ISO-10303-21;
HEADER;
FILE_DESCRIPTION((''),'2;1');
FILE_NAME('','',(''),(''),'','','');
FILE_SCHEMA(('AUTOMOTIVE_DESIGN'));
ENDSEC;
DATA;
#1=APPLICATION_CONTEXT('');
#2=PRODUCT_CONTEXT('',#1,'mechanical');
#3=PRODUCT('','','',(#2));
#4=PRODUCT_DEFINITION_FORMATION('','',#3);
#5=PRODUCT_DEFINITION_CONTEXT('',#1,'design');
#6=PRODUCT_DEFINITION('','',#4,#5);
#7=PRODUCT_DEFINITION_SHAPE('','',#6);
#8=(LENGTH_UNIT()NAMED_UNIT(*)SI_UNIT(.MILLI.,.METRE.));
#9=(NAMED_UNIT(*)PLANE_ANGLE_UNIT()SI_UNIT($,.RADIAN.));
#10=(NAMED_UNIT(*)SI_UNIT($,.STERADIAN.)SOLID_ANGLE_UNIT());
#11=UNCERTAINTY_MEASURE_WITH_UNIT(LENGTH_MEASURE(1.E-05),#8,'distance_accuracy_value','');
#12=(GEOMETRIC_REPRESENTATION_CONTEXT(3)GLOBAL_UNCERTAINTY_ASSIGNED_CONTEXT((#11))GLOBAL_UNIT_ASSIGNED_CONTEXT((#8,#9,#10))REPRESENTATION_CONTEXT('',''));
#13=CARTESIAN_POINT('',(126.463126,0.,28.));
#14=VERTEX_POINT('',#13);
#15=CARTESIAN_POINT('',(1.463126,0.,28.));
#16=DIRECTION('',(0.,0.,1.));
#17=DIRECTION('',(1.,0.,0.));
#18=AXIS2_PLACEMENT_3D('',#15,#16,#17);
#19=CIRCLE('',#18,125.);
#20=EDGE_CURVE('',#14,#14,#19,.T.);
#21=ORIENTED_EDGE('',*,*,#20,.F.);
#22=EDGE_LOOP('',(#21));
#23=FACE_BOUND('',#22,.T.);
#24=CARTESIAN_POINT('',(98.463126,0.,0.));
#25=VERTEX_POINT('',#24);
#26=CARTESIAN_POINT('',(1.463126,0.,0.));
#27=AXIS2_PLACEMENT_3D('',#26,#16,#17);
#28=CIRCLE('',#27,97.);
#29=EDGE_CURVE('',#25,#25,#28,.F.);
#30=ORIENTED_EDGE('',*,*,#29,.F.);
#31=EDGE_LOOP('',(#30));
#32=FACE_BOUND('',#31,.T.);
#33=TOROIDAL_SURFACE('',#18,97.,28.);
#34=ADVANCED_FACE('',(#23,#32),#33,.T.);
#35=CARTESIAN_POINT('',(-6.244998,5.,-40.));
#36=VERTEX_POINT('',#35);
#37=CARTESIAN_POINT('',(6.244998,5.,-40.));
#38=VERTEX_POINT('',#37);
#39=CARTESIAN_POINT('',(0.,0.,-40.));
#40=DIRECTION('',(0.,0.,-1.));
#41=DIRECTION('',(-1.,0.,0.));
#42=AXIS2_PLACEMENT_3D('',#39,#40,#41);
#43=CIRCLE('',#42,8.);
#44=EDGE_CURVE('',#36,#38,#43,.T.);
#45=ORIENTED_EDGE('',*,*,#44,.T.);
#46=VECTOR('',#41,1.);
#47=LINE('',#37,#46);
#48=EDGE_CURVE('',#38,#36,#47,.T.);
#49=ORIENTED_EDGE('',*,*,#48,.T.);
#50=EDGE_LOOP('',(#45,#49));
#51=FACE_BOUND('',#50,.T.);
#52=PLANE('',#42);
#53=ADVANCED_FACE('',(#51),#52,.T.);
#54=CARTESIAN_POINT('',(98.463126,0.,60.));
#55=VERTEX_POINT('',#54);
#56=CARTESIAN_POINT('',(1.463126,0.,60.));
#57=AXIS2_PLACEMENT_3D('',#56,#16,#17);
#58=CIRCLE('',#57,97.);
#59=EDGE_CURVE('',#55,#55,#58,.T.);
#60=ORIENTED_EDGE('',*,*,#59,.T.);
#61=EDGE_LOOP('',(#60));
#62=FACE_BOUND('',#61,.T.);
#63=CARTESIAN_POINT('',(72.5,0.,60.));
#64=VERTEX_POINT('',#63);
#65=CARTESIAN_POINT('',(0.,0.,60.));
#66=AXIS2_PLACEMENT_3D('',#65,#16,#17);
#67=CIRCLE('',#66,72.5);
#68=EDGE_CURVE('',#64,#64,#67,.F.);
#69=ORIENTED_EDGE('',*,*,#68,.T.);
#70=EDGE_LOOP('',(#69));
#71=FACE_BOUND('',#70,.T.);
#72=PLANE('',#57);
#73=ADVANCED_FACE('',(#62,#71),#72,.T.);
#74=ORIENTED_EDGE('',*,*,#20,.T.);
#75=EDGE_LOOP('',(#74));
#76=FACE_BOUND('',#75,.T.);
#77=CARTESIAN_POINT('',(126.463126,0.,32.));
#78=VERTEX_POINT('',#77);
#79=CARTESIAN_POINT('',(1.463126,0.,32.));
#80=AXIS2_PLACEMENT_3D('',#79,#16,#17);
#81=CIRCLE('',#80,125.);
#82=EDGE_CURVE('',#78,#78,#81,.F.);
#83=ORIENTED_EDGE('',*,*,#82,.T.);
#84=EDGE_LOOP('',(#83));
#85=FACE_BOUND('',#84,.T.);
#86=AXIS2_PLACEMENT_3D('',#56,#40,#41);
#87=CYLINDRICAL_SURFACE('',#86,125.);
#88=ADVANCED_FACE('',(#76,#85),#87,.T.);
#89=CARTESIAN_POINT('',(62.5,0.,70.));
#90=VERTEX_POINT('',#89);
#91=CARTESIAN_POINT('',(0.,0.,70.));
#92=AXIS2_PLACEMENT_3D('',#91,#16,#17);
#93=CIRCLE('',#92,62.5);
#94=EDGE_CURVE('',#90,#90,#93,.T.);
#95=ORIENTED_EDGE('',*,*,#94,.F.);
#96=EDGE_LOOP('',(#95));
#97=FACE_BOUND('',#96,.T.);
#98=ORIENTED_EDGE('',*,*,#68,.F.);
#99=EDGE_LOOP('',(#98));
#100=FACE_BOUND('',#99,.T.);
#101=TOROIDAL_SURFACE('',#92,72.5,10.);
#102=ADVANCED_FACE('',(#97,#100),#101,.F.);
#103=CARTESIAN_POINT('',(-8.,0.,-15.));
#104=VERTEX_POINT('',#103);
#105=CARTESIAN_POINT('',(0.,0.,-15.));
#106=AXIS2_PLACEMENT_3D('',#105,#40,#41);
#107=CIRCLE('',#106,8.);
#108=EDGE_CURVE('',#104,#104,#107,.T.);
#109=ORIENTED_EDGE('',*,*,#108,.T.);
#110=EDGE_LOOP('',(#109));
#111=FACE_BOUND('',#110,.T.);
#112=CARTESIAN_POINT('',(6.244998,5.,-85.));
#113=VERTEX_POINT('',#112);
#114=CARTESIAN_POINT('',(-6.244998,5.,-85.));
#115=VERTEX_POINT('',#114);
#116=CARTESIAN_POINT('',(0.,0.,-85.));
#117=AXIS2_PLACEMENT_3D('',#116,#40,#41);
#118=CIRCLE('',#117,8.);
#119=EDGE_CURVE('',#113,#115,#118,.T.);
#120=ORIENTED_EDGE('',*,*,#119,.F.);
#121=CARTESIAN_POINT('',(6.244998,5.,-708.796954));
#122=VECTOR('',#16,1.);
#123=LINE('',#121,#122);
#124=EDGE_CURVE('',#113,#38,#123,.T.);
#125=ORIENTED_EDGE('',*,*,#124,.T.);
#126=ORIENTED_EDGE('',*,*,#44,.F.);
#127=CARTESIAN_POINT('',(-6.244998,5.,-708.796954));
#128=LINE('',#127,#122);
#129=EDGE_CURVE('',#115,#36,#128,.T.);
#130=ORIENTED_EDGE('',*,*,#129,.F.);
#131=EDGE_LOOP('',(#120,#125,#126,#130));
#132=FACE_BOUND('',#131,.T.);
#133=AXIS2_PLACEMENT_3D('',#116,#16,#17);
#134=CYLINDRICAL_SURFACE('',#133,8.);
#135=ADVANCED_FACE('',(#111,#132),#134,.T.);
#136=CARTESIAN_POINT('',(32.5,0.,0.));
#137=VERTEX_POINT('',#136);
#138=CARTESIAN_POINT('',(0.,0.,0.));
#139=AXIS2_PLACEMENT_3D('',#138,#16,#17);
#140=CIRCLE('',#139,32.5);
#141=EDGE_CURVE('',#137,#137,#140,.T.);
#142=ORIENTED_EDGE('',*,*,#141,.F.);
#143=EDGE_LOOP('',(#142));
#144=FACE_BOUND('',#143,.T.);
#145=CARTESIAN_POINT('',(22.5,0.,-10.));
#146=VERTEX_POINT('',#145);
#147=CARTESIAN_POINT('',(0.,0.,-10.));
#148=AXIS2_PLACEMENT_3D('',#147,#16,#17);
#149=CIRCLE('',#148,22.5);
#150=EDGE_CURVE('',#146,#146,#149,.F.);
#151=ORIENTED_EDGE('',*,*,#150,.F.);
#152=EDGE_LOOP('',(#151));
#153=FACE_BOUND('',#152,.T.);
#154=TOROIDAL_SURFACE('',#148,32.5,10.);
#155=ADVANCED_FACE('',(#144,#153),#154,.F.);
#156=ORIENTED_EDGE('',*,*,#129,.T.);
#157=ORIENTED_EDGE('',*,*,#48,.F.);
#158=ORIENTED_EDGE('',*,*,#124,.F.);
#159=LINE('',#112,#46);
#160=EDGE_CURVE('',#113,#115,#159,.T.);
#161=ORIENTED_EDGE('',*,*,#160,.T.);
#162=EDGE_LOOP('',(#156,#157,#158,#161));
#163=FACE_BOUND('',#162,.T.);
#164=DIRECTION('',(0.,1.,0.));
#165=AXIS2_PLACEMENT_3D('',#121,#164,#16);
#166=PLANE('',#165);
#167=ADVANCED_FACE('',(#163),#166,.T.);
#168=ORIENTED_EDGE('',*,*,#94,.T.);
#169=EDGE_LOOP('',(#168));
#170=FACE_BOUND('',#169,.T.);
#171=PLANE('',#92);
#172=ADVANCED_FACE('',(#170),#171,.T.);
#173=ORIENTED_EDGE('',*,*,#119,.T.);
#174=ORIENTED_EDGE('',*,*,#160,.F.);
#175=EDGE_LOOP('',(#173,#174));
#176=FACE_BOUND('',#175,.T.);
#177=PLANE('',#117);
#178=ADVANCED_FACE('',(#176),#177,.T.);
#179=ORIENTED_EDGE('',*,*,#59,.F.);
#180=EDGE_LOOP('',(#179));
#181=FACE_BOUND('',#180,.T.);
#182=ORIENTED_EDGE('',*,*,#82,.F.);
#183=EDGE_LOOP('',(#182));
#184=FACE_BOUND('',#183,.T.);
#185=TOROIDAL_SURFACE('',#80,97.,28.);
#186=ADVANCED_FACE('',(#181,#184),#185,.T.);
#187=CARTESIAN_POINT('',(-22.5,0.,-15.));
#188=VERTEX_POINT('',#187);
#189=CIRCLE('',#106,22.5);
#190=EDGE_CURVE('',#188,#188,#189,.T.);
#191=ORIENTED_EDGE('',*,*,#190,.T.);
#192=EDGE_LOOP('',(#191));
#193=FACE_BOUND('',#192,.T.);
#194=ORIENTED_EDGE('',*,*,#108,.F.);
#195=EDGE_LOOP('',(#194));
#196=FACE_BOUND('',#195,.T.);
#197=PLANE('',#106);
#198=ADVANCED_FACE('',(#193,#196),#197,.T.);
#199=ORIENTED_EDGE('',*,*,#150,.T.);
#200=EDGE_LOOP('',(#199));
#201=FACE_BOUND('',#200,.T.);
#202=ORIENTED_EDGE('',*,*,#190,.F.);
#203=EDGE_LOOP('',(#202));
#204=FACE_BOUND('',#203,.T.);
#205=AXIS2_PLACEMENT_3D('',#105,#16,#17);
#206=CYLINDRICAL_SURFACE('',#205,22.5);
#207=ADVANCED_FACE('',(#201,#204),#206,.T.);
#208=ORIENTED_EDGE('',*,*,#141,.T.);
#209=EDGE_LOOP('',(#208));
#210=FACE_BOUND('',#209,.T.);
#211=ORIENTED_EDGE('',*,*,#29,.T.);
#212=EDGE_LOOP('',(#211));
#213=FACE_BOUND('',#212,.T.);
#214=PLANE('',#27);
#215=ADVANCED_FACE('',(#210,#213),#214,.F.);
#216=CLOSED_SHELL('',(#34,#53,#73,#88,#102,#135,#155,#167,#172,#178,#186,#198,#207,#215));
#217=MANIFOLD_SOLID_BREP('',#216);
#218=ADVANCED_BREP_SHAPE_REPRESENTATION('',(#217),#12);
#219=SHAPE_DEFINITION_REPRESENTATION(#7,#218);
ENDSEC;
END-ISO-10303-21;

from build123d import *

# Parameters (mm, degrees)
SCHIZZO1_R                    = 125
ESTRUSIONE_ESTRUSIONE1_DEPTH  = 60
SCHIZZO2_R                    = 62.5
ESTRUSIONE_ESTRUSIONE2_DEPTH  = 10
SCHIZZO3_R                    = 22.5
ESTRUSIONE_ESTRUSIONE3_DEPTH  = 15
SCHIZZO4_R                    = 8
ESTRUSIONE_ESTRUSIONE4_DEPTH  = 70
RACCORDO1_R                   = 10
RACCORDO2_R                   = 28
TAGLIO_ESTRUSIONE1_DEPTH      = 236.887520145
TAGLIO_ESTRUSIONE1_DEPTH_BACK = 45


with BuildPart() as part:
    # Schizzo1 → Estrusione-Estrusione1 (new body)
    with BuildSketch(Plane.XY):
        with Locations((1.463125693, 0)):
            Circle(SCHIZZO1_R)
    extrude(amount=ESTRUSIONE_ESTRUSIONE1_DEPTH)

    # Schizzo2 → Estrusione-Estrusione2 (add)
    with BuildSketch(Plane.XY.offset(60)):
        Circle(SCHIZZO2_R)
    extrude(amount=ESTRUSIONE_ESTRUSIONE2_DEPTH)

    # Schizzo3 → Estrusione-Estrusione3 (add)
    with BuildSketch(Plane(origin=(0, 0, 0), x_dir=(-1, 0, 0), z_dir=(0, 0, -1))):
        Circle(SCHIZZO3_R)
    extrude(amount=ESTRUSIONE_ESTRUSIONE3_DEPTH)

    # Schizzo4 → Estrusione-Estrusione4 (add)
    with BuildSketch(Plane(origin=(0, 0, -15), x_dir=(-1, 0, 0), z_dir=(0, 0, -1))):
        Circle(SCHIZZO4_R)
    extrude(amount=ESTRUSIONE_ESTRUSIONE4_DEPTH)

    # Raccordo1
    raccordo1_edges = [part.edges().sort_by_distance(p)[0] for p in [
        (-62.5, 0, 60),
        (22.5, 0, 0),
    ]]
    fillet(raccordo1_edges, radius=RACCORDO1_R - 0.0001)  # a hair under: the kernel refuses the full size

    # Raccordo2
    raccordo2_edges = [part.edges().sort_by_distance(p)[0] for p in [
        (-123.536874307, 0, 0),
        (-123.536874307, 0, 60),
    ]]
    fillet(raccordo2_edges, radius=RACCORDO2_R)

    # Schizzo5 → Taglio-Estrusione1 (cut, two sides: drawn at the far end of the back side and taken through both)
    with BuildSketch(Plane(origin=(0, 0, -85), x_dir=(-1, 0, 0), z_dir=(0, 0, -1)).offset(-TAGLIO_ESTRUSIONE1_DEPTH_BACK)):
        Polygon((-387.790129005, 5), (-6.244997998, 5), (6.244997998, 5), (387.790129005, 5), (387.790129005, 768.090262014), (-387.790129005, 768.090262014), align=None)
    extrude(amount=TAGLIO_ESTRUSIONE1_DEPTH + TAGLIO_ESTRUSIONE1_DEPTH_BACK, mode=Mode.SUBTRACT)


solid = part.part
